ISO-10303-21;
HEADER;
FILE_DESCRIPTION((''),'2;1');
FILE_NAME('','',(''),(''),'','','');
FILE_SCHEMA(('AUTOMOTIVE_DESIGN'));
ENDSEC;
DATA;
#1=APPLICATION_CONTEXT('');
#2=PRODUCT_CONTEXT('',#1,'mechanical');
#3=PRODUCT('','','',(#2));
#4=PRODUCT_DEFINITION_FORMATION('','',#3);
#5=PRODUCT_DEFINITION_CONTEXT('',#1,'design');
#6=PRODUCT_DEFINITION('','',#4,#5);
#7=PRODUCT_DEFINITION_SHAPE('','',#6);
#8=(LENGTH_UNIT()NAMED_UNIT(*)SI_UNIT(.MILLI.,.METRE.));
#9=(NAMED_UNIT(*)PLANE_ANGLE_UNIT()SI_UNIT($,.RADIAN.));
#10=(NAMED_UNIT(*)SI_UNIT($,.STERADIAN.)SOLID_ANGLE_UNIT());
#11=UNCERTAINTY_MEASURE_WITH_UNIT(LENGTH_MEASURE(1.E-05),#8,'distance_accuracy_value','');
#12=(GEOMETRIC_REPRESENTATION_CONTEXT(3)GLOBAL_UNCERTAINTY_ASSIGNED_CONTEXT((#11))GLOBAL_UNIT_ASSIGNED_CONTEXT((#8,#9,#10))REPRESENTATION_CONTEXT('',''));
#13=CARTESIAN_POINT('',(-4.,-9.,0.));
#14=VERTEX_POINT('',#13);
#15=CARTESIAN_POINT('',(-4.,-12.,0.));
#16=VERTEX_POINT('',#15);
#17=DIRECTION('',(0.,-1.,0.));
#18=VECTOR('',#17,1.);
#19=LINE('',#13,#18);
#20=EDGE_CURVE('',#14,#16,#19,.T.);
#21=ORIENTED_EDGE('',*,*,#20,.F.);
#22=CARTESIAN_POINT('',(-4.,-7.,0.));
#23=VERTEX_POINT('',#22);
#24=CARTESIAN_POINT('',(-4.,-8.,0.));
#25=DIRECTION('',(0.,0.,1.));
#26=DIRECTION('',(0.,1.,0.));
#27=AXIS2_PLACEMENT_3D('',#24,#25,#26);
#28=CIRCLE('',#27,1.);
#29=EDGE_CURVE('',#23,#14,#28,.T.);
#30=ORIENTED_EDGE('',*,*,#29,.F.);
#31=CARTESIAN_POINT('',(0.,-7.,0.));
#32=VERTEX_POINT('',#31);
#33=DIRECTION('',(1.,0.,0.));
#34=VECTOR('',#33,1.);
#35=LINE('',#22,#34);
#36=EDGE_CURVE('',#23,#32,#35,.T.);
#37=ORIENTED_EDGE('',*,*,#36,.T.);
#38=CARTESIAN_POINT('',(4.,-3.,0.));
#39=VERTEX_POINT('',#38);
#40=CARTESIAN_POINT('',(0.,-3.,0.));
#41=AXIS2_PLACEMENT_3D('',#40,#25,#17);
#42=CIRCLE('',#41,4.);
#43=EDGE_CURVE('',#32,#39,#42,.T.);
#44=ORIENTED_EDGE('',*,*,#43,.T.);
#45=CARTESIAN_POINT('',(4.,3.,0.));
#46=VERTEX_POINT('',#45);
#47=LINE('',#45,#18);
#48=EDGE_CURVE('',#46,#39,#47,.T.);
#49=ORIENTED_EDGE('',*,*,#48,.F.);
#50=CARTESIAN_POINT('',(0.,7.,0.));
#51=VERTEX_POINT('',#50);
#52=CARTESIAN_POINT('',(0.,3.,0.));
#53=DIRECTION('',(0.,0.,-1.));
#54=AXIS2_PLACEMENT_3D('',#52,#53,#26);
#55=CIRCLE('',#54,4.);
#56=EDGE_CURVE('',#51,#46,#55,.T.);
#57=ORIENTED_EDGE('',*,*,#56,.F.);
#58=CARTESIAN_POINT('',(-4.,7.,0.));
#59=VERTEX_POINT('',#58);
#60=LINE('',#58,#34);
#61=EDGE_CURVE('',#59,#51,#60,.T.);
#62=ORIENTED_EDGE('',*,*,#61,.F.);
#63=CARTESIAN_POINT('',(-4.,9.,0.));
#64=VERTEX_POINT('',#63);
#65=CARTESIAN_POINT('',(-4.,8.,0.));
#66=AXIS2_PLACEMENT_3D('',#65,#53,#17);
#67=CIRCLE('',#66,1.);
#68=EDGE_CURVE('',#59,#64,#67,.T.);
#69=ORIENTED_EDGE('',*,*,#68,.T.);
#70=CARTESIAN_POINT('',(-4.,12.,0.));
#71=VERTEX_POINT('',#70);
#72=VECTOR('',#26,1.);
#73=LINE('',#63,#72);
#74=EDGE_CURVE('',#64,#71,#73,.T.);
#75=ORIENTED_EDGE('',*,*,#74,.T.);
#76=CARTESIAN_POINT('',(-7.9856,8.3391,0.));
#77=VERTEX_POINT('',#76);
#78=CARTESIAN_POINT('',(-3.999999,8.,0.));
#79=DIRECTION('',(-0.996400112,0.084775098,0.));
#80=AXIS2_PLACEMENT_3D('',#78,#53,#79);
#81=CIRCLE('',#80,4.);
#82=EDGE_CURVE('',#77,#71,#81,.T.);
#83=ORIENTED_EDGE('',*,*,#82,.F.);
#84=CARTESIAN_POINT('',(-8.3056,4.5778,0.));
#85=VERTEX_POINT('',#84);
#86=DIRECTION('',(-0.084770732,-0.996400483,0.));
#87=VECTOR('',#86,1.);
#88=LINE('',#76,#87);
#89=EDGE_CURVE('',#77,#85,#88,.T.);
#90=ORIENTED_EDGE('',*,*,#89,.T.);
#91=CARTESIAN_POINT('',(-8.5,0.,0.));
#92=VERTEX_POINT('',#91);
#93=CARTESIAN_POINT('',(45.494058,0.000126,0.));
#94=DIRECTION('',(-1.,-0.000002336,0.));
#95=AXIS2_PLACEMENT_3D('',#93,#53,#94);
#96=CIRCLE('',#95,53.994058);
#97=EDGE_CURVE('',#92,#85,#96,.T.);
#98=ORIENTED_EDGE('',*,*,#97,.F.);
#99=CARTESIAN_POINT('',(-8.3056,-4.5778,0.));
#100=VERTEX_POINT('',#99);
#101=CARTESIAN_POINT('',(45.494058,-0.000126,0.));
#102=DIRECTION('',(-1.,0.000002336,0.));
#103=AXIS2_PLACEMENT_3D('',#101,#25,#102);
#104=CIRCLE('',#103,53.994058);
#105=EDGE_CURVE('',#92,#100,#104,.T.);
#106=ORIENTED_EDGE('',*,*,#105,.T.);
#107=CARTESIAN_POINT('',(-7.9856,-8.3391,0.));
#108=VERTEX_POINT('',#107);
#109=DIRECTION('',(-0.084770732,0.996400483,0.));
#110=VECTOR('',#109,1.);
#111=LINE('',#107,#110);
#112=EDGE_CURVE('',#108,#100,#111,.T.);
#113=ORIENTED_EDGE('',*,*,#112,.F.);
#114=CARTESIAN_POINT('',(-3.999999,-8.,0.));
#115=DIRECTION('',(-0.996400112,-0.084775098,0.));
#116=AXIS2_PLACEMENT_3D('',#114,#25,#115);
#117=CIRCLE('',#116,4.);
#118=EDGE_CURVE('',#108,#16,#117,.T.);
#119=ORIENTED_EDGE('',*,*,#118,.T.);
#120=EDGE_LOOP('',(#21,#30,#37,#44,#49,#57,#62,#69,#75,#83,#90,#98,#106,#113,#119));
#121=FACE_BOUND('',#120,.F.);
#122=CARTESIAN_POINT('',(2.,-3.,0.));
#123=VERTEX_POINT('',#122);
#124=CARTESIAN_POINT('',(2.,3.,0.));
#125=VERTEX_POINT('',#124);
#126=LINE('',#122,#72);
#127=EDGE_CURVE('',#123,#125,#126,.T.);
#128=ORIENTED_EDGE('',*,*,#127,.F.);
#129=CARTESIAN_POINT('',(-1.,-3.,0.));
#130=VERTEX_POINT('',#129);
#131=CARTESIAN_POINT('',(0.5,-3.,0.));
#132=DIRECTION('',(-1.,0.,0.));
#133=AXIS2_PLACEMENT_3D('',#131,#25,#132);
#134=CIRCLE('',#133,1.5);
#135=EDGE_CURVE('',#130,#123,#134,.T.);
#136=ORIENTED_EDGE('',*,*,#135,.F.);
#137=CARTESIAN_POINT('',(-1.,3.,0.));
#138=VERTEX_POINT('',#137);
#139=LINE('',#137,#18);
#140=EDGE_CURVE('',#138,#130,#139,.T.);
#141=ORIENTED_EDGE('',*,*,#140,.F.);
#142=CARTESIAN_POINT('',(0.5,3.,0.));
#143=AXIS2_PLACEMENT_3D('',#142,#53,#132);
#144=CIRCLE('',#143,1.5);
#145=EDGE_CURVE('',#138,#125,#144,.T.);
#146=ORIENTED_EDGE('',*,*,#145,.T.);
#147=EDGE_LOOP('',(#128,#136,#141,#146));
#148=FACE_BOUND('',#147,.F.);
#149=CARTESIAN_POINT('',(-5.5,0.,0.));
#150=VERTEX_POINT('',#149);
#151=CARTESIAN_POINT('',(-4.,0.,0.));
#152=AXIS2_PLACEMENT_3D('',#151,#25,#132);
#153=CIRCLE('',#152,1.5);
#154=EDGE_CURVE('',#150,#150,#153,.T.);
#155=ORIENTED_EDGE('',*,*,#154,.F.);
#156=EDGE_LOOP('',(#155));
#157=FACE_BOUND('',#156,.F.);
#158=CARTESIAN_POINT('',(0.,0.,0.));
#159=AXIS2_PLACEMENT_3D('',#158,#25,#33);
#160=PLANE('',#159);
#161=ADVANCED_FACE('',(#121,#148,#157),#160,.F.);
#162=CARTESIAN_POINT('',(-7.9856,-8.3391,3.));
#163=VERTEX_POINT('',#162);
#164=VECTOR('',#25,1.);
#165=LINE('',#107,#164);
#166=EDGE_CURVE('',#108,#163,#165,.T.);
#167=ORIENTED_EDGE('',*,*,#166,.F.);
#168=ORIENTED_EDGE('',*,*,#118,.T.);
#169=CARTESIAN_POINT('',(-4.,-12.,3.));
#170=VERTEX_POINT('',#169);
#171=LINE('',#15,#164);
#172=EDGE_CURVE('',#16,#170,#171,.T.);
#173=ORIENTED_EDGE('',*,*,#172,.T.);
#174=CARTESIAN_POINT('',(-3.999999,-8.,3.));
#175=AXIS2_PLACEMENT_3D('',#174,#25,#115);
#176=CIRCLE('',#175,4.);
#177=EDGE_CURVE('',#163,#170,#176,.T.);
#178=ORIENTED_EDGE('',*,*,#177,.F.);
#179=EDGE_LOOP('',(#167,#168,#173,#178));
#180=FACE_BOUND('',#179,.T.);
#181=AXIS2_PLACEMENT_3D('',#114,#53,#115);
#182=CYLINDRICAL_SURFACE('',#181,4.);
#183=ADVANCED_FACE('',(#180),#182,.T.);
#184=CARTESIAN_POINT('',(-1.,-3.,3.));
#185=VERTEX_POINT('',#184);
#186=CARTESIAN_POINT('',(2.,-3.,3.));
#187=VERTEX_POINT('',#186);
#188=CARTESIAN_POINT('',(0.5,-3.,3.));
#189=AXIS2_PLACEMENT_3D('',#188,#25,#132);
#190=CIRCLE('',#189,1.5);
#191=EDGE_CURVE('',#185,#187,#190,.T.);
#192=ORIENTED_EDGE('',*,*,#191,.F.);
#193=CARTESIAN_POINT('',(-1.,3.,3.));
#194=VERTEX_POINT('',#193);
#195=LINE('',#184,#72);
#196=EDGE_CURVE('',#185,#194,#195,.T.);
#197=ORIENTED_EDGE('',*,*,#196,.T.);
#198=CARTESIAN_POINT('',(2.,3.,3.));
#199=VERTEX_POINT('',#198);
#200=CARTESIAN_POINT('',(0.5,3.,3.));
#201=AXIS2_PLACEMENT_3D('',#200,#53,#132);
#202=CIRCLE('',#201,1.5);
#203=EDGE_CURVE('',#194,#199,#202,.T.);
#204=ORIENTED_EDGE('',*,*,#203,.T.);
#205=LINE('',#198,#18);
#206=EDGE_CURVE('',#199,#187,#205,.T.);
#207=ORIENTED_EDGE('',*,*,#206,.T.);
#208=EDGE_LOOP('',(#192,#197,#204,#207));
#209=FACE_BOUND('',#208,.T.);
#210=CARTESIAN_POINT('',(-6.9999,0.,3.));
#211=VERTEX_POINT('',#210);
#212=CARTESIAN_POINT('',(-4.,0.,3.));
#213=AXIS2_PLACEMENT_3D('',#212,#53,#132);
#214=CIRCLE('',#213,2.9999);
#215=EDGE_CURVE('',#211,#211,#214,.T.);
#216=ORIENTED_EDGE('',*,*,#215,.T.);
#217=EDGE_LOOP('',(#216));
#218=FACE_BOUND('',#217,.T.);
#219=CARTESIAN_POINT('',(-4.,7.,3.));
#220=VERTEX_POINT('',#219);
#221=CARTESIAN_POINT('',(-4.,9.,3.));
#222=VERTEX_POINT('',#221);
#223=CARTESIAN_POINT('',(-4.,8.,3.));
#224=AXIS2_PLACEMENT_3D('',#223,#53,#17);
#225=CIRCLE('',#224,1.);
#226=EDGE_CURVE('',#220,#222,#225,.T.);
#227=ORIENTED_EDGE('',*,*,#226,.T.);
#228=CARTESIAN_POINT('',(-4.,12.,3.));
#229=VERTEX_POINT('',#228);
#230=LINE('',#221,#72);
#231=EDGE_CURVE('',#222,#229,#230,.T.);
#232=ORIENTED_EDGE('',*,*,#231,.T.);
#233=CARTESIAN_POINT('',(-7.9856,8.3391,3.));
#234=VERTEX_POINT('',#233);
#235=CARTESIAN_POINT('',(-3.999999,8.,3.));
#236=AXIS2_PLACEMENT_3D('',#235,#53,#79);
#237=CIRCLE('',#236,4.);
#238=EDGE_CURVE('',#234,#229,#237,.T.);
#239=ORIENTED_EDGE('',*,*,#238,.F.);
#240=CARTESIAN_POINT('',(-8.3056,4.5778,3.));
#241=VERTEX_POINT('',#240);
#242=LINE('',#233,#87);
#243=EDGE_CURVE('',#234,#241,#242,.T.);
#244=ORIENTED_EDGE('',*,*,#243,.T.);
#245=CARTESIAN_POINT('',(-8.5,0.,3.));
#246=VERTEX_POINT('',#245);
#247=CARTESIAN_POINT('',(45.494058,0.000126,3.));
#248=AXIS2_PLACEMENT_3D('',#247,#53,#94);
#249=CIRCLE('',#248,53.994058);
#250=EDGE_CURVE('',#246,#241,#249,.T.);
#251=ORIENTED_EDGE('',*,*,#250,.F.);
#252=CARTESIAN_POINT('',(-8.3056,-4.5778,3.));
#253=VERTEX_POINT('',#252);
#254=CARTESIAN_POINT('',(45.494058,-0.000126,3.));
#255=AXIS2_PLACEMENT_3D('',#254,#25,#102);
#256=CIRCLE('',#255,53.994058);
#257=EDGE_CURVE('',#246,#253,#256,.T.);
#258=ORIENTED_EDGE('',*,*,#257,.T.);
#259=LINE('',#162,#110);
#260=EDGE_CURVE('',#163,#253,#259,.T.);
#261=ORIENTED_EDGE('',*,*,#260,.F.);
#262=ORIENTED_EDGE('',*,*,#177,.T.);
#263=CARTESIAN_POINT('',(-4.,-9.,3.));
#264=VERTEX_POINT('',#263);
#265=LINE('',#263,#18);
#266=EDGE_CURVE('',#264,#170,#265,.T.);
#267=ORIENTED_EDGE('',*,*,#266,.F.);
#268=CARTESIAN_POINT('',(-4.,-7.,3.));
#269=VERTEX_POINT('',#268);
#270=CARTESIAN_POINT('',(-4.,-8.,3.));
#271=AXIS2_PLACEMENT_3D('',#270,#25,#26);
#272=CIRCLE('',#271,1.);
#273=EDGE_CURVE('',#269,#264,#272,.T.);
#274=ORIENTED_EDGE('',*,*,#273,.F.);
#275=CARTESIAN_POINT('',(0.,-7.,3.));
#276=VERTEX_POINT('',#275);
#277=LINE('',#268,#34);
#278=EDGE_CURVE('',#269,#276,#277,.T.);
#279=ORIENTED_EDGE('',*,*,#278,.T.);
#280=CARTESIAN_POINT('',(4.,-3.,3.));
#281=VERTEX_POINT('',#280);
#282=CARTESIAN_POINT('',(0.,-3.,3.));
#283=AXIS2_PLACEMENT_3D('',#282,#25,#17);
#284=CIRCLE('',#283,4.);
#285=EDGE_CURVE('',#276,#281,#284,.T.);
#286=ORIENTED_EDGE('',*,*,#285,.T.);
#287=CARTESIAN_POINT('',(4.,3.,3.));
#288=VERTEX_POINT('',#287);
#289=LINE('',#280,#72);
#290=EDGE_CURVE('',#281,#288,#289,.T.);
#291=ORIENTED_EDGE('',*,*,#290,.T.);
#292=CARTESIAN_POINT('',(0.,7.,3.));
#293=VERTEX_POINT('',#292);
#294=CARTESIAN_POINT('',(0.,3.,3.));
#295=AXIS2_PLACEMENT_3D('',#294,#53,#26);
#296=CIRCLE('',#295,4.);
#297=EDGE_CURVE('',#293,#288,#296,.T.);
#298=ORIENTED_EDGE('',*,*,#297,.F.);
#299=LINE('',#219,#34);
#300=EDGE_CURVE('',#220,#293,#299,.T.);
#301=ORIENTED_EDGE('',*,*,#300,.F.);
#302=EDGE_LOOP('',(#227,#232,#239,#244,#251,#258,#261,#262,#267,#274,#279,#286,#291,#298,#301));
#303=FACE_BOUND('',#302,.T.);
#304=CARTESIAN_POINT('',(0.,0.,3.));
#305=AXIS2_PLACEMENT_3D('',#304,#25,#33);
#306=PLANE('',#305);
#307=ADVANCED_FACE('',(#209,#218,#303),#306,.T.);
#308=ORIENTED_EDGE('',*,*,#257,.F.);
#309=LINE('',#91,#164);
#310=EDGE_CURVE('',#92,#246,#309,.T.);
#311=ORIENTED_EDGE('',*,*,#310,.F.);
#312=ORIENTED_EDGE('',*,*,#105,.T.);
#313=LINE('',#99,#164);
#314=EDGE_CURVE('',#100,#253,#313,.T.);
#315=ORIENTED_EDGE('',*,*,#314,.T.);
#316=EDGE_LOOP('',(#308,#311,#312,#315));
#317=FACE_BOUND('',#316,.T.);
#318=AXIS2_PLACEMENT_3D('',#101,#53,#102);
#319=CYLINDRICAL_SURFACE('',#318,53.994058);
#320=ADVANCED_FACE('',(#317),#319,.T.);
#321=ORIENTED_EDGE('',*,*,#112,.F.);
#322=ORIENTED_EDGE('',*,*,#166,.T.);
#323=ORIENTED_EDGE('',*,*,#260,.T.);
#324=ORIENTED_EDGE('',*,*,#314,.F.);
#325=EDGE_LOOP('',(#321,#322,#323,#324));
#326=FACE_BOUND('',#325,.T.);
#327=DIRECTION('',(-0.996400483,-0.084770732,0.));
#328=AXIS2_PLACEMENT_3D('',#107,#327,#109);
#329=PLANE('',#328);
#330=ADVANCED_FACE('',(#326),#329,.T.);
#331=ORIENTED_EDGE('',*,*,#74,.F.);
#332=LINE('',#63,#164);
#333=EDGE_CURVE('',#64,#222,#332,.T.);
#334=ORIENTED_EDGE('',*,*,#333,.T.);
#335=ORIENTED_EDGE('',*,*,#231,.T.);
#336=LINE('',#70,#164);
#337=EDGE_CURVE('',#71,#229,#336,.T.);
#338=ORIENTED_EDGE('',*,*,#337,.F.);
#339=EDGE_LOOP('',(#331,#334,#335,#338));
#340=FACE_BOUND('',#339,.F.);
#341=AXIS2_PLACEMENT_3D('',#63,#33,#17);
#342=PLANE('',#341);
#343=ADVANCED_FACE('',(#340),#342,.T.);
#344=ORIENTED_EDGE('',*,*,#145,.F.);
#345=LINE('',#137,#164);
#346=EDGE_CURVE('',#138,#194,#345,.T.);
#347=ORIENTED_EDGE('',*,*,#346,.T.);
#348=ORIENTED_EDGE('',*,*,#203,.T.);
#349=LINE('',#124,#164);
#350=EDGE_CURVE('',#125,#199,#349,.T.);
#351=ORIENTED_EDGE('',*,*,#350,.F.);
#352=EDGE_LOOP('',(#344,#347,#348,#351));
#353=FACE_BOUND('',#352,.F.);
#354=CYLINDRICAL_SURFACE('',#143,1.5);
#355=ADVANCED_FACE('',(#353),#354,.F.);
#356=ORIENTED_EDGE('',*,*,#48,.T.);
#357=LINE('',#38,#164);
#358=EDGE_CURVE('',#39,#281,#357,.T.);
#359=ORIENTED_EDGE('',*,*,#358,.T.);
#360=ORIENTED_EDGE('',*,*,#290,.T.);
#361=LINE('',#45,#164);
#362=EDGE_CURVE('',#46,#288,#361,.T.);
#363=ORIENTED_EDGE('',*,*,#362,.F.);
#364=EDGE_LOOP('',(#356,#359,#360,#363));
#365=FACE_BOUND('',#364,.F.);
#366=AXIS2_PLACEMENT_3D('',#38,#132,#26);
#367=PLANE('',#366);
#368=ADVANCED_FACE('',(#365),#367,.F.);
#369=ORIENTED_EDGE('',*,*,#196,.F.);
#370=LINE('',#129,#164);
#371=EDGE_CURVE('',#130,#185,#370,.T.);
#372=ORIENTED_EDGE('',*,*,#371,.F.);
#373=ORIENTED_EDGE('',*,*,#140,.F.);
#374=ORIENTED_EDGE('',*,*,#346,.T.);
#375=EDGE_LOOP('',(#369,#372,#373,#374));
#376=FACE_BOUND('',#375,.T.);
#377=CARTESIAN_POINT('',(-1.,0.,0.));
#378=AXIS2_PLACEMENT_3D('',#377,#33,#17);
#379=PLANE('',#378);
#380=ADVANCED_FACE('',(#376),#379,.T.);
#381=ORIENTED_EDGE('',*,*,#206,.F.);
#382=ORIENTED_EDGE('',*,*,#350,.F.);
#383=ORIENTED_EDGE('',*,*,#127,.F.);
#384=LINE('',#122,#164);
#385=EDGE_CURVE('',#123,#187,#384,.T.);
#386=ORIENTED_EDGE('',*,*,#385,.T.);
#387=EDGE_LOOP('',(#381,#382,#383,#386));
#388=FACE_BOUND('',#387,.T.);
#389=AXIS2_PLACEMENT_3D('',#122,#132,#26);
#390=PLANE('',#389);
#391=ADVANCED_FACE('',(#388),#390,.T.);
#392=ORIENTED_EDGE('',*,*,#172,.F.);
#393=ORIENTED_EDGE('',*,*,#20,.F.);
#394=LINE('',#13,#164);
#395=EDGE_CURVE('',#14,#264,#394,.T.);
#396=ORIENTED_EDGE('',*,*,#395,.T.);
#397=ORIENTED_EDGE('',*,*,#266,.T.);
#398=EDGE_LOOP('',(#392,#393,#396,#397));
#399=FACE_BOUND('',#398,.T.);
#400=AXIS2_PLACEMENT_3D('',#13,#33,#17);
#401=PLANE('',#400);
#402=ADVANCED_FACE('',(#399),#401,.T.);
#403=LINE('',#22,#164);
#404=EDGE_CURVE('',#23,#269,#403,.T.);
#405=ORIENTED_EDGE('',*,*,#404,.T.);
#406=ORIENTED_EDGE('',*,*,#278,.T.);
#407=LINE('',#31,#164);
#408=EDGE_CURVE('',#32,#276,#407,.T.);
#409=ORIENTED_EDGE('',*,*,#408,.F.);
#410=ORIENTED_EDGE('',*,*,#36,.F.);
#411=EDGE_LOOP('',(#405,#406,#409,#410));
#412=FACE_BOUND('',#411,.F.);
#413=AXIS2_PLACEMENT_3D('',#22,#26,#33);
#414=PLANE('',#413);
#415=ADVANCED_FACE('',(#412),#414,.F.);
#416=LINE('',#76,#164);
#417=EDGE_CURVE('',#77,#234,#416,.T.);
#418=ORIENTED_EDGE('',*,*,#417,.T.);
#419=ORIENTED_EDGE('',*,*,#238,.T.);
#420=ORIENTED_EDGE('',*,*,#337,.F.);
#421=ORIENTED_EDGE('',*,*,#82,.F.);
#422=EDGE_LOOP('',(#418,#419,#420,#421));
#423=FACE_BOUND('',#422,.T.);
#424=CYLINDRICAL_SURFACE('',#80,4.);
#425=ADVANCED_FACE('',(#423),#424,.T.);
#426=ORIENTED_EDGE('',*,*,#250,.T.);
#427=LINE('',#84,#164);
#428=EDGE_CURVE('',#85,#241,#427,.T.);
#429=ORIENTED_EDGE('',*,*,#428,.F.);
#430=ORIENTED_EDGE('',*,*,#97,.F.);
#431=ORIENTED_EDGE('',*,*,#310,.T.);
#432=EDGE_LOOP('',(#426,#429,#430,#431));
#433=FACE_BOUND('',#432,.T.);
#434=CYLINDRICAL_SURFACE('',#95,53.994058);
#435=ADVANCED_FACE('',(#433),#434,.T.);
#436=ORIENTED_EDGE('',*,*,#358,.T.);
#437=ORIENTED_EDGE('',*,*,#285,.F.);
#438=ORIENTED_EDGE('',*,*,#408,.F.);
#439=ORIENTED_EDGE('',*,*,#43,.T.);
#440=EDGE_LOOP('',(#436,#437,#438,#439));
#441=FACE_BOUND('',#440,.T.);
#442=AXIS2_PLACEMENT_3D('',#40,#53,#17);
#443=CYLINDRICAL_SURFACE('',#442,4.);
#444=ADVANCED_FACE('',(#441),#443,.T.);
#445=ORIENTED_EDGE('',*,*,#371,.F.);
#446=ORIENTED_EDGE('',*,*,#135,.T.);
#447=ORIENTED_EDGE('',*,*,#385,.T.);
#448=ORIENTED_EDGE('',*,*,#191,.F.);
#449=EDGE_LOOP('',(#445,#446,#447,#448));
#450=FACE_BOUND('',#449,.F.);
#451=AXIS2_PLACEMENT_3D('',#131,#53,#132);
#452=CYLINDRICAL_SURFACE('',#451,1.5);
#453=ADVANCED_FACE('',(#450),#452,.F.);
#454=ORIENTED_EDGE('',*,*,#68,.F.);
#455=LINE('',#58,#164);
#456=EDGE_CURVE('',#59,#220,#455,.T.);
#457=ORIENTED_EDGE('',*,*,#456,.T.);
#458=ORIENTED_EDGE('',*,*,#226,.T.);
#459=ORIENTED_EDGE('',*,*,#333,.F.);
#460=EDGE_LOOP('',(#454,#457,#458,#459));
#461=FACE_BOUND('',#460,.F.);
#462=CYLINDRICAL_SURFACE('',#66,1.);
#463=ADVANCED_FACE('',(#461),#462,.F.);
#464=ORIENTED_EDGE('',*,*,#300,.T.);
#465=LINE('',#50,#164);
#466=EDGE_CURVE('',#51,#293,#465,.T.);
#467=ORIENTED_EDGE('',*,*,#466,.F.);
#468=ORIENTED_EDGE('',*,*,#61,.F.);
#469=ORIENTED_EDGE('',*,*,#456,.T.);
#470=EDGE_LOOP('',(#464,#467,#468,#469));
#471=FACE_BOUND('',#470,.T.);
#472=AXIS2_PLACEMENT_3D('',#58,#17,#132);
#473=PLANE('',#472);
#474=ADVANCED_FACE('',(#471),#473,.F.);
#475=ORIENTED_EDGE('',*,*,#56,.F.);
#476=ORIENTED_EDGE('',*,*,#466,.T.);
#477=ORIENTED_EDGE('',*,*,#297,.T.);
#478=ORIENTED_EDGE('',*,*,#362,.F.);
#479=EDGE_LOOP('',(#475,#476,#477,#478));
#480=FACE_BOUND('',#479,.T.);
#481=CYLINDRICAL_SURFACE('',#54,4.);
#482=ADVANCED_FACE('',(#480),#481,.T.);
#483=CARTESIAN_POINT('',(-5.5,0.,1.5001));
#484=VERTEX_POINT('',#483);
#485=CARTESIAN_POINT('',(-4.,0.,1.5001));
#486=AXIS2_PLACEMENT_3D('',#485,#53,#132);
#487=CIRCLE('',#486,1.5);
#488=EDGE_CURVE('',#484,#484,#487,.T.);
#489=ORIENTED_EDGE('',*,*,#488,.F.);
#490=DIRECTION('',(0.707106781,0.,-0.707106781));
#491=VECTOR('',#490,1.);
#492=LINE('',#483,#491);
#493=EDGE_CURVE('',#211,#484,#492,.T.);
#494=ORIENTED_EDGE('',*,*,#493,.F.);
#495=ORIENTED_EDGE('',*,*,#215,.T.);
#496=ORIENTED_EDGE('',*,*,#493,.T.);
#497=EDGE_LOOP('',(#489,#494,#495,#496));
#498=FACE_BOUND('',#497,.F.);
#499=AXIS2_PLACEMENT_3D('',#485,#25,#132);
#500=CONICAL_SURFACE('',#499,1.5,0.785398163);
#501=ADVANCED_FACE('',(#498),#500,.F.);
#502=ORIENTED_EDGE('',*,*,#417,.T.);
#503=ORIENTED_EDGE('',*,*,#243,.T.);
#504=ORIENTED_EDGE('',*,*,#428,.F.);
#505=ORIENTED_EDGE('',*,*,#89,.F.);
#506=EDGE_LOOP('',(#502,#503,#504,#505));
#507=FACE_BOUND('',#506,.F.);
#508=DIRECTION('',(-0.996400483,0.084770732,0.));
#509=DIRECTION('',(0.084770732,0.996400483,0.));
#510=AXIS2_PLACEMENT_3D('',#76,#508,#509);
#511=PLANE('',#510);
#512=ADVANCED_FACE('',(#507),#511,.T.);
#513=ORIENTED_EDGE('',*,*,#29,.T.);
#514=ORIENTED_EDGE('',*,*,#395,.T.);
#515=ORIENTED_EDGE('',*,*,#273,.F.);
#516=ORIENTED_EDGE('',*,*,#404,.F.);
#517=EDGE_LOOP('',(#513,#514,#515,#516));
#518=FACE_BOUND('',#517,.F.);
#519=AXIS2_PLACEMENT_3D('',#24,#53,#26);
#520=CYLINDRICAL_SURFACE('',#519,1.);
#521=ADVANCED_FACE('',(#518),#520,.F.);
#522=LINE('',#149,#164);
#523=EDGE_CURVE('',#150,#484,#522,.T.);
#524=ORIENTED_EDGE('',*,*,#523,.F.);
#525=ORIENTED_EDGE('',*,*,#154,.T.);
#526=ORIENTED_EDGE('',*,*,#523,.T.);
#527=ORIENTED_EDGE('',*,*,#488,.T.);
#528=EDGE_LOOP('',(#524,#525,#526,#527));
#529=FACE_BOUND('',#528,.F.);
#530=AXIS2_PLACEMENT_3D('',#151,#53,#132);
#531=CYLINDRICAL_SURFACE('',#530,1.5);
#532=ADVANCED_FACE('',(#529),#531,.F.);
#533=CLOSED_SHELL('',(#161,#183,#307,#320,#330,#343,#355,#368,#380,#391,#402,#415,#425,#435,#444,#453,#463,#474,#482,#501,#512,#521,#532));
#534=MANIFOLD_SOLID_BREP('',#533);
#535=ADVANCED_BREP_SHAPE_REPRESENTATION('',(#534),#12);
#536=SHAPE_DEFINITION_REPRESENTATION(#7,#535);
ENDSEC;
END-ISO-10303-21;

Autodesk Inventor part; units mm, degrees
ref_plane "YZ Plane" through (0, 0, 0) normal (1, 0, 0) x (0, 1, 0)
ref_plane "XZ Plane" through (0, 0, 0) normal (0, 1, 0) x (-1, 0, 0)
ref_plane "XY Plane" through (0, 0, 0) normal (0, 0, 1) x (1, 0, 0)
sketch "スケッチ1" plane through (0, 0, 0) normal (0, 0, 1) x (1, 0, 0)
  line L0 (-4, -7) -> (0, -7)
  line L1 (4, -3) -> (4, 0)
  arc A0 (-4, -7) -> (-4, -9) centre (-4, -8) ccw
  line L2 (-4, -9) -> (-4, -12)
  arc A1 (-5.5, 0) -> (-2.5, 0) centre (-4, 0) ccw
  arc A2 (-7.9856, -8.3391) -> (-4, -12) centre (-4, -8) ccw
  line L3 (-7.9856, -8.3391) -> (-8.3056, -4.5778)
  line L4 (-8.5, 0) -> (-5.5, 0)
  line L5 (-1, 0) -> (-1, -3)
  line L6 (2, -3) -> (2, 0)
  line L7 (-2.5, 0) -> (-1, 0)
  line L8 (2, 0) -> (4, 0)
  arc A3 (-1, -3) -> (2, -3) centre (0.5, -3) ccw
  circle A4 centre (-4, 0) radius 5 construction
  line L9 (-9, 0) -> (-9, -7) construction
  arc A5 (-8.5, 0) -> (-8.3056, -4.5778) centre (45.5, 0) ccw
  circle A6 centre (-4, 0) radius 3 construction
  arc A7 (0, -7) -> (4, -3) centre (0, -3) ccw
  point P0 (0, 0)
  point P1 (0, 0)
  point P2 (0, 0)
  dimension "d14" = 10
  dimension "d17" = 6
  dimension "d3" = 1
  dimension "d4" = 3
  dimension "d6" = 3
  dimension "d8" = 4
  dimension "d11" = 3
  dimension "d13" = 2
  dimension "d15" = 5
  dimension "d16" = 54
  dimension "d31" = 4
  dimension "d32" = 7
  dimension "d41" = 4
  dimension "d42" = 4
  dimension "d43" = 4
  dimension "d46" = 1.5
  dimension "d47" = 3
  dimension "d48" = 3
  dimension "d53" = 0
extrude "押し出し1" add sketch "スケッチ1" along normal blind 3
mirror "ミラー1" about plane through (-1, 0, 0) normal (0, 1, 0) of "押し出し1"
chamfer "面取り1" distance 1.5 angle 45 1 edges at (-4, -1.5, 3)
properties part number "ShaftBase2"
